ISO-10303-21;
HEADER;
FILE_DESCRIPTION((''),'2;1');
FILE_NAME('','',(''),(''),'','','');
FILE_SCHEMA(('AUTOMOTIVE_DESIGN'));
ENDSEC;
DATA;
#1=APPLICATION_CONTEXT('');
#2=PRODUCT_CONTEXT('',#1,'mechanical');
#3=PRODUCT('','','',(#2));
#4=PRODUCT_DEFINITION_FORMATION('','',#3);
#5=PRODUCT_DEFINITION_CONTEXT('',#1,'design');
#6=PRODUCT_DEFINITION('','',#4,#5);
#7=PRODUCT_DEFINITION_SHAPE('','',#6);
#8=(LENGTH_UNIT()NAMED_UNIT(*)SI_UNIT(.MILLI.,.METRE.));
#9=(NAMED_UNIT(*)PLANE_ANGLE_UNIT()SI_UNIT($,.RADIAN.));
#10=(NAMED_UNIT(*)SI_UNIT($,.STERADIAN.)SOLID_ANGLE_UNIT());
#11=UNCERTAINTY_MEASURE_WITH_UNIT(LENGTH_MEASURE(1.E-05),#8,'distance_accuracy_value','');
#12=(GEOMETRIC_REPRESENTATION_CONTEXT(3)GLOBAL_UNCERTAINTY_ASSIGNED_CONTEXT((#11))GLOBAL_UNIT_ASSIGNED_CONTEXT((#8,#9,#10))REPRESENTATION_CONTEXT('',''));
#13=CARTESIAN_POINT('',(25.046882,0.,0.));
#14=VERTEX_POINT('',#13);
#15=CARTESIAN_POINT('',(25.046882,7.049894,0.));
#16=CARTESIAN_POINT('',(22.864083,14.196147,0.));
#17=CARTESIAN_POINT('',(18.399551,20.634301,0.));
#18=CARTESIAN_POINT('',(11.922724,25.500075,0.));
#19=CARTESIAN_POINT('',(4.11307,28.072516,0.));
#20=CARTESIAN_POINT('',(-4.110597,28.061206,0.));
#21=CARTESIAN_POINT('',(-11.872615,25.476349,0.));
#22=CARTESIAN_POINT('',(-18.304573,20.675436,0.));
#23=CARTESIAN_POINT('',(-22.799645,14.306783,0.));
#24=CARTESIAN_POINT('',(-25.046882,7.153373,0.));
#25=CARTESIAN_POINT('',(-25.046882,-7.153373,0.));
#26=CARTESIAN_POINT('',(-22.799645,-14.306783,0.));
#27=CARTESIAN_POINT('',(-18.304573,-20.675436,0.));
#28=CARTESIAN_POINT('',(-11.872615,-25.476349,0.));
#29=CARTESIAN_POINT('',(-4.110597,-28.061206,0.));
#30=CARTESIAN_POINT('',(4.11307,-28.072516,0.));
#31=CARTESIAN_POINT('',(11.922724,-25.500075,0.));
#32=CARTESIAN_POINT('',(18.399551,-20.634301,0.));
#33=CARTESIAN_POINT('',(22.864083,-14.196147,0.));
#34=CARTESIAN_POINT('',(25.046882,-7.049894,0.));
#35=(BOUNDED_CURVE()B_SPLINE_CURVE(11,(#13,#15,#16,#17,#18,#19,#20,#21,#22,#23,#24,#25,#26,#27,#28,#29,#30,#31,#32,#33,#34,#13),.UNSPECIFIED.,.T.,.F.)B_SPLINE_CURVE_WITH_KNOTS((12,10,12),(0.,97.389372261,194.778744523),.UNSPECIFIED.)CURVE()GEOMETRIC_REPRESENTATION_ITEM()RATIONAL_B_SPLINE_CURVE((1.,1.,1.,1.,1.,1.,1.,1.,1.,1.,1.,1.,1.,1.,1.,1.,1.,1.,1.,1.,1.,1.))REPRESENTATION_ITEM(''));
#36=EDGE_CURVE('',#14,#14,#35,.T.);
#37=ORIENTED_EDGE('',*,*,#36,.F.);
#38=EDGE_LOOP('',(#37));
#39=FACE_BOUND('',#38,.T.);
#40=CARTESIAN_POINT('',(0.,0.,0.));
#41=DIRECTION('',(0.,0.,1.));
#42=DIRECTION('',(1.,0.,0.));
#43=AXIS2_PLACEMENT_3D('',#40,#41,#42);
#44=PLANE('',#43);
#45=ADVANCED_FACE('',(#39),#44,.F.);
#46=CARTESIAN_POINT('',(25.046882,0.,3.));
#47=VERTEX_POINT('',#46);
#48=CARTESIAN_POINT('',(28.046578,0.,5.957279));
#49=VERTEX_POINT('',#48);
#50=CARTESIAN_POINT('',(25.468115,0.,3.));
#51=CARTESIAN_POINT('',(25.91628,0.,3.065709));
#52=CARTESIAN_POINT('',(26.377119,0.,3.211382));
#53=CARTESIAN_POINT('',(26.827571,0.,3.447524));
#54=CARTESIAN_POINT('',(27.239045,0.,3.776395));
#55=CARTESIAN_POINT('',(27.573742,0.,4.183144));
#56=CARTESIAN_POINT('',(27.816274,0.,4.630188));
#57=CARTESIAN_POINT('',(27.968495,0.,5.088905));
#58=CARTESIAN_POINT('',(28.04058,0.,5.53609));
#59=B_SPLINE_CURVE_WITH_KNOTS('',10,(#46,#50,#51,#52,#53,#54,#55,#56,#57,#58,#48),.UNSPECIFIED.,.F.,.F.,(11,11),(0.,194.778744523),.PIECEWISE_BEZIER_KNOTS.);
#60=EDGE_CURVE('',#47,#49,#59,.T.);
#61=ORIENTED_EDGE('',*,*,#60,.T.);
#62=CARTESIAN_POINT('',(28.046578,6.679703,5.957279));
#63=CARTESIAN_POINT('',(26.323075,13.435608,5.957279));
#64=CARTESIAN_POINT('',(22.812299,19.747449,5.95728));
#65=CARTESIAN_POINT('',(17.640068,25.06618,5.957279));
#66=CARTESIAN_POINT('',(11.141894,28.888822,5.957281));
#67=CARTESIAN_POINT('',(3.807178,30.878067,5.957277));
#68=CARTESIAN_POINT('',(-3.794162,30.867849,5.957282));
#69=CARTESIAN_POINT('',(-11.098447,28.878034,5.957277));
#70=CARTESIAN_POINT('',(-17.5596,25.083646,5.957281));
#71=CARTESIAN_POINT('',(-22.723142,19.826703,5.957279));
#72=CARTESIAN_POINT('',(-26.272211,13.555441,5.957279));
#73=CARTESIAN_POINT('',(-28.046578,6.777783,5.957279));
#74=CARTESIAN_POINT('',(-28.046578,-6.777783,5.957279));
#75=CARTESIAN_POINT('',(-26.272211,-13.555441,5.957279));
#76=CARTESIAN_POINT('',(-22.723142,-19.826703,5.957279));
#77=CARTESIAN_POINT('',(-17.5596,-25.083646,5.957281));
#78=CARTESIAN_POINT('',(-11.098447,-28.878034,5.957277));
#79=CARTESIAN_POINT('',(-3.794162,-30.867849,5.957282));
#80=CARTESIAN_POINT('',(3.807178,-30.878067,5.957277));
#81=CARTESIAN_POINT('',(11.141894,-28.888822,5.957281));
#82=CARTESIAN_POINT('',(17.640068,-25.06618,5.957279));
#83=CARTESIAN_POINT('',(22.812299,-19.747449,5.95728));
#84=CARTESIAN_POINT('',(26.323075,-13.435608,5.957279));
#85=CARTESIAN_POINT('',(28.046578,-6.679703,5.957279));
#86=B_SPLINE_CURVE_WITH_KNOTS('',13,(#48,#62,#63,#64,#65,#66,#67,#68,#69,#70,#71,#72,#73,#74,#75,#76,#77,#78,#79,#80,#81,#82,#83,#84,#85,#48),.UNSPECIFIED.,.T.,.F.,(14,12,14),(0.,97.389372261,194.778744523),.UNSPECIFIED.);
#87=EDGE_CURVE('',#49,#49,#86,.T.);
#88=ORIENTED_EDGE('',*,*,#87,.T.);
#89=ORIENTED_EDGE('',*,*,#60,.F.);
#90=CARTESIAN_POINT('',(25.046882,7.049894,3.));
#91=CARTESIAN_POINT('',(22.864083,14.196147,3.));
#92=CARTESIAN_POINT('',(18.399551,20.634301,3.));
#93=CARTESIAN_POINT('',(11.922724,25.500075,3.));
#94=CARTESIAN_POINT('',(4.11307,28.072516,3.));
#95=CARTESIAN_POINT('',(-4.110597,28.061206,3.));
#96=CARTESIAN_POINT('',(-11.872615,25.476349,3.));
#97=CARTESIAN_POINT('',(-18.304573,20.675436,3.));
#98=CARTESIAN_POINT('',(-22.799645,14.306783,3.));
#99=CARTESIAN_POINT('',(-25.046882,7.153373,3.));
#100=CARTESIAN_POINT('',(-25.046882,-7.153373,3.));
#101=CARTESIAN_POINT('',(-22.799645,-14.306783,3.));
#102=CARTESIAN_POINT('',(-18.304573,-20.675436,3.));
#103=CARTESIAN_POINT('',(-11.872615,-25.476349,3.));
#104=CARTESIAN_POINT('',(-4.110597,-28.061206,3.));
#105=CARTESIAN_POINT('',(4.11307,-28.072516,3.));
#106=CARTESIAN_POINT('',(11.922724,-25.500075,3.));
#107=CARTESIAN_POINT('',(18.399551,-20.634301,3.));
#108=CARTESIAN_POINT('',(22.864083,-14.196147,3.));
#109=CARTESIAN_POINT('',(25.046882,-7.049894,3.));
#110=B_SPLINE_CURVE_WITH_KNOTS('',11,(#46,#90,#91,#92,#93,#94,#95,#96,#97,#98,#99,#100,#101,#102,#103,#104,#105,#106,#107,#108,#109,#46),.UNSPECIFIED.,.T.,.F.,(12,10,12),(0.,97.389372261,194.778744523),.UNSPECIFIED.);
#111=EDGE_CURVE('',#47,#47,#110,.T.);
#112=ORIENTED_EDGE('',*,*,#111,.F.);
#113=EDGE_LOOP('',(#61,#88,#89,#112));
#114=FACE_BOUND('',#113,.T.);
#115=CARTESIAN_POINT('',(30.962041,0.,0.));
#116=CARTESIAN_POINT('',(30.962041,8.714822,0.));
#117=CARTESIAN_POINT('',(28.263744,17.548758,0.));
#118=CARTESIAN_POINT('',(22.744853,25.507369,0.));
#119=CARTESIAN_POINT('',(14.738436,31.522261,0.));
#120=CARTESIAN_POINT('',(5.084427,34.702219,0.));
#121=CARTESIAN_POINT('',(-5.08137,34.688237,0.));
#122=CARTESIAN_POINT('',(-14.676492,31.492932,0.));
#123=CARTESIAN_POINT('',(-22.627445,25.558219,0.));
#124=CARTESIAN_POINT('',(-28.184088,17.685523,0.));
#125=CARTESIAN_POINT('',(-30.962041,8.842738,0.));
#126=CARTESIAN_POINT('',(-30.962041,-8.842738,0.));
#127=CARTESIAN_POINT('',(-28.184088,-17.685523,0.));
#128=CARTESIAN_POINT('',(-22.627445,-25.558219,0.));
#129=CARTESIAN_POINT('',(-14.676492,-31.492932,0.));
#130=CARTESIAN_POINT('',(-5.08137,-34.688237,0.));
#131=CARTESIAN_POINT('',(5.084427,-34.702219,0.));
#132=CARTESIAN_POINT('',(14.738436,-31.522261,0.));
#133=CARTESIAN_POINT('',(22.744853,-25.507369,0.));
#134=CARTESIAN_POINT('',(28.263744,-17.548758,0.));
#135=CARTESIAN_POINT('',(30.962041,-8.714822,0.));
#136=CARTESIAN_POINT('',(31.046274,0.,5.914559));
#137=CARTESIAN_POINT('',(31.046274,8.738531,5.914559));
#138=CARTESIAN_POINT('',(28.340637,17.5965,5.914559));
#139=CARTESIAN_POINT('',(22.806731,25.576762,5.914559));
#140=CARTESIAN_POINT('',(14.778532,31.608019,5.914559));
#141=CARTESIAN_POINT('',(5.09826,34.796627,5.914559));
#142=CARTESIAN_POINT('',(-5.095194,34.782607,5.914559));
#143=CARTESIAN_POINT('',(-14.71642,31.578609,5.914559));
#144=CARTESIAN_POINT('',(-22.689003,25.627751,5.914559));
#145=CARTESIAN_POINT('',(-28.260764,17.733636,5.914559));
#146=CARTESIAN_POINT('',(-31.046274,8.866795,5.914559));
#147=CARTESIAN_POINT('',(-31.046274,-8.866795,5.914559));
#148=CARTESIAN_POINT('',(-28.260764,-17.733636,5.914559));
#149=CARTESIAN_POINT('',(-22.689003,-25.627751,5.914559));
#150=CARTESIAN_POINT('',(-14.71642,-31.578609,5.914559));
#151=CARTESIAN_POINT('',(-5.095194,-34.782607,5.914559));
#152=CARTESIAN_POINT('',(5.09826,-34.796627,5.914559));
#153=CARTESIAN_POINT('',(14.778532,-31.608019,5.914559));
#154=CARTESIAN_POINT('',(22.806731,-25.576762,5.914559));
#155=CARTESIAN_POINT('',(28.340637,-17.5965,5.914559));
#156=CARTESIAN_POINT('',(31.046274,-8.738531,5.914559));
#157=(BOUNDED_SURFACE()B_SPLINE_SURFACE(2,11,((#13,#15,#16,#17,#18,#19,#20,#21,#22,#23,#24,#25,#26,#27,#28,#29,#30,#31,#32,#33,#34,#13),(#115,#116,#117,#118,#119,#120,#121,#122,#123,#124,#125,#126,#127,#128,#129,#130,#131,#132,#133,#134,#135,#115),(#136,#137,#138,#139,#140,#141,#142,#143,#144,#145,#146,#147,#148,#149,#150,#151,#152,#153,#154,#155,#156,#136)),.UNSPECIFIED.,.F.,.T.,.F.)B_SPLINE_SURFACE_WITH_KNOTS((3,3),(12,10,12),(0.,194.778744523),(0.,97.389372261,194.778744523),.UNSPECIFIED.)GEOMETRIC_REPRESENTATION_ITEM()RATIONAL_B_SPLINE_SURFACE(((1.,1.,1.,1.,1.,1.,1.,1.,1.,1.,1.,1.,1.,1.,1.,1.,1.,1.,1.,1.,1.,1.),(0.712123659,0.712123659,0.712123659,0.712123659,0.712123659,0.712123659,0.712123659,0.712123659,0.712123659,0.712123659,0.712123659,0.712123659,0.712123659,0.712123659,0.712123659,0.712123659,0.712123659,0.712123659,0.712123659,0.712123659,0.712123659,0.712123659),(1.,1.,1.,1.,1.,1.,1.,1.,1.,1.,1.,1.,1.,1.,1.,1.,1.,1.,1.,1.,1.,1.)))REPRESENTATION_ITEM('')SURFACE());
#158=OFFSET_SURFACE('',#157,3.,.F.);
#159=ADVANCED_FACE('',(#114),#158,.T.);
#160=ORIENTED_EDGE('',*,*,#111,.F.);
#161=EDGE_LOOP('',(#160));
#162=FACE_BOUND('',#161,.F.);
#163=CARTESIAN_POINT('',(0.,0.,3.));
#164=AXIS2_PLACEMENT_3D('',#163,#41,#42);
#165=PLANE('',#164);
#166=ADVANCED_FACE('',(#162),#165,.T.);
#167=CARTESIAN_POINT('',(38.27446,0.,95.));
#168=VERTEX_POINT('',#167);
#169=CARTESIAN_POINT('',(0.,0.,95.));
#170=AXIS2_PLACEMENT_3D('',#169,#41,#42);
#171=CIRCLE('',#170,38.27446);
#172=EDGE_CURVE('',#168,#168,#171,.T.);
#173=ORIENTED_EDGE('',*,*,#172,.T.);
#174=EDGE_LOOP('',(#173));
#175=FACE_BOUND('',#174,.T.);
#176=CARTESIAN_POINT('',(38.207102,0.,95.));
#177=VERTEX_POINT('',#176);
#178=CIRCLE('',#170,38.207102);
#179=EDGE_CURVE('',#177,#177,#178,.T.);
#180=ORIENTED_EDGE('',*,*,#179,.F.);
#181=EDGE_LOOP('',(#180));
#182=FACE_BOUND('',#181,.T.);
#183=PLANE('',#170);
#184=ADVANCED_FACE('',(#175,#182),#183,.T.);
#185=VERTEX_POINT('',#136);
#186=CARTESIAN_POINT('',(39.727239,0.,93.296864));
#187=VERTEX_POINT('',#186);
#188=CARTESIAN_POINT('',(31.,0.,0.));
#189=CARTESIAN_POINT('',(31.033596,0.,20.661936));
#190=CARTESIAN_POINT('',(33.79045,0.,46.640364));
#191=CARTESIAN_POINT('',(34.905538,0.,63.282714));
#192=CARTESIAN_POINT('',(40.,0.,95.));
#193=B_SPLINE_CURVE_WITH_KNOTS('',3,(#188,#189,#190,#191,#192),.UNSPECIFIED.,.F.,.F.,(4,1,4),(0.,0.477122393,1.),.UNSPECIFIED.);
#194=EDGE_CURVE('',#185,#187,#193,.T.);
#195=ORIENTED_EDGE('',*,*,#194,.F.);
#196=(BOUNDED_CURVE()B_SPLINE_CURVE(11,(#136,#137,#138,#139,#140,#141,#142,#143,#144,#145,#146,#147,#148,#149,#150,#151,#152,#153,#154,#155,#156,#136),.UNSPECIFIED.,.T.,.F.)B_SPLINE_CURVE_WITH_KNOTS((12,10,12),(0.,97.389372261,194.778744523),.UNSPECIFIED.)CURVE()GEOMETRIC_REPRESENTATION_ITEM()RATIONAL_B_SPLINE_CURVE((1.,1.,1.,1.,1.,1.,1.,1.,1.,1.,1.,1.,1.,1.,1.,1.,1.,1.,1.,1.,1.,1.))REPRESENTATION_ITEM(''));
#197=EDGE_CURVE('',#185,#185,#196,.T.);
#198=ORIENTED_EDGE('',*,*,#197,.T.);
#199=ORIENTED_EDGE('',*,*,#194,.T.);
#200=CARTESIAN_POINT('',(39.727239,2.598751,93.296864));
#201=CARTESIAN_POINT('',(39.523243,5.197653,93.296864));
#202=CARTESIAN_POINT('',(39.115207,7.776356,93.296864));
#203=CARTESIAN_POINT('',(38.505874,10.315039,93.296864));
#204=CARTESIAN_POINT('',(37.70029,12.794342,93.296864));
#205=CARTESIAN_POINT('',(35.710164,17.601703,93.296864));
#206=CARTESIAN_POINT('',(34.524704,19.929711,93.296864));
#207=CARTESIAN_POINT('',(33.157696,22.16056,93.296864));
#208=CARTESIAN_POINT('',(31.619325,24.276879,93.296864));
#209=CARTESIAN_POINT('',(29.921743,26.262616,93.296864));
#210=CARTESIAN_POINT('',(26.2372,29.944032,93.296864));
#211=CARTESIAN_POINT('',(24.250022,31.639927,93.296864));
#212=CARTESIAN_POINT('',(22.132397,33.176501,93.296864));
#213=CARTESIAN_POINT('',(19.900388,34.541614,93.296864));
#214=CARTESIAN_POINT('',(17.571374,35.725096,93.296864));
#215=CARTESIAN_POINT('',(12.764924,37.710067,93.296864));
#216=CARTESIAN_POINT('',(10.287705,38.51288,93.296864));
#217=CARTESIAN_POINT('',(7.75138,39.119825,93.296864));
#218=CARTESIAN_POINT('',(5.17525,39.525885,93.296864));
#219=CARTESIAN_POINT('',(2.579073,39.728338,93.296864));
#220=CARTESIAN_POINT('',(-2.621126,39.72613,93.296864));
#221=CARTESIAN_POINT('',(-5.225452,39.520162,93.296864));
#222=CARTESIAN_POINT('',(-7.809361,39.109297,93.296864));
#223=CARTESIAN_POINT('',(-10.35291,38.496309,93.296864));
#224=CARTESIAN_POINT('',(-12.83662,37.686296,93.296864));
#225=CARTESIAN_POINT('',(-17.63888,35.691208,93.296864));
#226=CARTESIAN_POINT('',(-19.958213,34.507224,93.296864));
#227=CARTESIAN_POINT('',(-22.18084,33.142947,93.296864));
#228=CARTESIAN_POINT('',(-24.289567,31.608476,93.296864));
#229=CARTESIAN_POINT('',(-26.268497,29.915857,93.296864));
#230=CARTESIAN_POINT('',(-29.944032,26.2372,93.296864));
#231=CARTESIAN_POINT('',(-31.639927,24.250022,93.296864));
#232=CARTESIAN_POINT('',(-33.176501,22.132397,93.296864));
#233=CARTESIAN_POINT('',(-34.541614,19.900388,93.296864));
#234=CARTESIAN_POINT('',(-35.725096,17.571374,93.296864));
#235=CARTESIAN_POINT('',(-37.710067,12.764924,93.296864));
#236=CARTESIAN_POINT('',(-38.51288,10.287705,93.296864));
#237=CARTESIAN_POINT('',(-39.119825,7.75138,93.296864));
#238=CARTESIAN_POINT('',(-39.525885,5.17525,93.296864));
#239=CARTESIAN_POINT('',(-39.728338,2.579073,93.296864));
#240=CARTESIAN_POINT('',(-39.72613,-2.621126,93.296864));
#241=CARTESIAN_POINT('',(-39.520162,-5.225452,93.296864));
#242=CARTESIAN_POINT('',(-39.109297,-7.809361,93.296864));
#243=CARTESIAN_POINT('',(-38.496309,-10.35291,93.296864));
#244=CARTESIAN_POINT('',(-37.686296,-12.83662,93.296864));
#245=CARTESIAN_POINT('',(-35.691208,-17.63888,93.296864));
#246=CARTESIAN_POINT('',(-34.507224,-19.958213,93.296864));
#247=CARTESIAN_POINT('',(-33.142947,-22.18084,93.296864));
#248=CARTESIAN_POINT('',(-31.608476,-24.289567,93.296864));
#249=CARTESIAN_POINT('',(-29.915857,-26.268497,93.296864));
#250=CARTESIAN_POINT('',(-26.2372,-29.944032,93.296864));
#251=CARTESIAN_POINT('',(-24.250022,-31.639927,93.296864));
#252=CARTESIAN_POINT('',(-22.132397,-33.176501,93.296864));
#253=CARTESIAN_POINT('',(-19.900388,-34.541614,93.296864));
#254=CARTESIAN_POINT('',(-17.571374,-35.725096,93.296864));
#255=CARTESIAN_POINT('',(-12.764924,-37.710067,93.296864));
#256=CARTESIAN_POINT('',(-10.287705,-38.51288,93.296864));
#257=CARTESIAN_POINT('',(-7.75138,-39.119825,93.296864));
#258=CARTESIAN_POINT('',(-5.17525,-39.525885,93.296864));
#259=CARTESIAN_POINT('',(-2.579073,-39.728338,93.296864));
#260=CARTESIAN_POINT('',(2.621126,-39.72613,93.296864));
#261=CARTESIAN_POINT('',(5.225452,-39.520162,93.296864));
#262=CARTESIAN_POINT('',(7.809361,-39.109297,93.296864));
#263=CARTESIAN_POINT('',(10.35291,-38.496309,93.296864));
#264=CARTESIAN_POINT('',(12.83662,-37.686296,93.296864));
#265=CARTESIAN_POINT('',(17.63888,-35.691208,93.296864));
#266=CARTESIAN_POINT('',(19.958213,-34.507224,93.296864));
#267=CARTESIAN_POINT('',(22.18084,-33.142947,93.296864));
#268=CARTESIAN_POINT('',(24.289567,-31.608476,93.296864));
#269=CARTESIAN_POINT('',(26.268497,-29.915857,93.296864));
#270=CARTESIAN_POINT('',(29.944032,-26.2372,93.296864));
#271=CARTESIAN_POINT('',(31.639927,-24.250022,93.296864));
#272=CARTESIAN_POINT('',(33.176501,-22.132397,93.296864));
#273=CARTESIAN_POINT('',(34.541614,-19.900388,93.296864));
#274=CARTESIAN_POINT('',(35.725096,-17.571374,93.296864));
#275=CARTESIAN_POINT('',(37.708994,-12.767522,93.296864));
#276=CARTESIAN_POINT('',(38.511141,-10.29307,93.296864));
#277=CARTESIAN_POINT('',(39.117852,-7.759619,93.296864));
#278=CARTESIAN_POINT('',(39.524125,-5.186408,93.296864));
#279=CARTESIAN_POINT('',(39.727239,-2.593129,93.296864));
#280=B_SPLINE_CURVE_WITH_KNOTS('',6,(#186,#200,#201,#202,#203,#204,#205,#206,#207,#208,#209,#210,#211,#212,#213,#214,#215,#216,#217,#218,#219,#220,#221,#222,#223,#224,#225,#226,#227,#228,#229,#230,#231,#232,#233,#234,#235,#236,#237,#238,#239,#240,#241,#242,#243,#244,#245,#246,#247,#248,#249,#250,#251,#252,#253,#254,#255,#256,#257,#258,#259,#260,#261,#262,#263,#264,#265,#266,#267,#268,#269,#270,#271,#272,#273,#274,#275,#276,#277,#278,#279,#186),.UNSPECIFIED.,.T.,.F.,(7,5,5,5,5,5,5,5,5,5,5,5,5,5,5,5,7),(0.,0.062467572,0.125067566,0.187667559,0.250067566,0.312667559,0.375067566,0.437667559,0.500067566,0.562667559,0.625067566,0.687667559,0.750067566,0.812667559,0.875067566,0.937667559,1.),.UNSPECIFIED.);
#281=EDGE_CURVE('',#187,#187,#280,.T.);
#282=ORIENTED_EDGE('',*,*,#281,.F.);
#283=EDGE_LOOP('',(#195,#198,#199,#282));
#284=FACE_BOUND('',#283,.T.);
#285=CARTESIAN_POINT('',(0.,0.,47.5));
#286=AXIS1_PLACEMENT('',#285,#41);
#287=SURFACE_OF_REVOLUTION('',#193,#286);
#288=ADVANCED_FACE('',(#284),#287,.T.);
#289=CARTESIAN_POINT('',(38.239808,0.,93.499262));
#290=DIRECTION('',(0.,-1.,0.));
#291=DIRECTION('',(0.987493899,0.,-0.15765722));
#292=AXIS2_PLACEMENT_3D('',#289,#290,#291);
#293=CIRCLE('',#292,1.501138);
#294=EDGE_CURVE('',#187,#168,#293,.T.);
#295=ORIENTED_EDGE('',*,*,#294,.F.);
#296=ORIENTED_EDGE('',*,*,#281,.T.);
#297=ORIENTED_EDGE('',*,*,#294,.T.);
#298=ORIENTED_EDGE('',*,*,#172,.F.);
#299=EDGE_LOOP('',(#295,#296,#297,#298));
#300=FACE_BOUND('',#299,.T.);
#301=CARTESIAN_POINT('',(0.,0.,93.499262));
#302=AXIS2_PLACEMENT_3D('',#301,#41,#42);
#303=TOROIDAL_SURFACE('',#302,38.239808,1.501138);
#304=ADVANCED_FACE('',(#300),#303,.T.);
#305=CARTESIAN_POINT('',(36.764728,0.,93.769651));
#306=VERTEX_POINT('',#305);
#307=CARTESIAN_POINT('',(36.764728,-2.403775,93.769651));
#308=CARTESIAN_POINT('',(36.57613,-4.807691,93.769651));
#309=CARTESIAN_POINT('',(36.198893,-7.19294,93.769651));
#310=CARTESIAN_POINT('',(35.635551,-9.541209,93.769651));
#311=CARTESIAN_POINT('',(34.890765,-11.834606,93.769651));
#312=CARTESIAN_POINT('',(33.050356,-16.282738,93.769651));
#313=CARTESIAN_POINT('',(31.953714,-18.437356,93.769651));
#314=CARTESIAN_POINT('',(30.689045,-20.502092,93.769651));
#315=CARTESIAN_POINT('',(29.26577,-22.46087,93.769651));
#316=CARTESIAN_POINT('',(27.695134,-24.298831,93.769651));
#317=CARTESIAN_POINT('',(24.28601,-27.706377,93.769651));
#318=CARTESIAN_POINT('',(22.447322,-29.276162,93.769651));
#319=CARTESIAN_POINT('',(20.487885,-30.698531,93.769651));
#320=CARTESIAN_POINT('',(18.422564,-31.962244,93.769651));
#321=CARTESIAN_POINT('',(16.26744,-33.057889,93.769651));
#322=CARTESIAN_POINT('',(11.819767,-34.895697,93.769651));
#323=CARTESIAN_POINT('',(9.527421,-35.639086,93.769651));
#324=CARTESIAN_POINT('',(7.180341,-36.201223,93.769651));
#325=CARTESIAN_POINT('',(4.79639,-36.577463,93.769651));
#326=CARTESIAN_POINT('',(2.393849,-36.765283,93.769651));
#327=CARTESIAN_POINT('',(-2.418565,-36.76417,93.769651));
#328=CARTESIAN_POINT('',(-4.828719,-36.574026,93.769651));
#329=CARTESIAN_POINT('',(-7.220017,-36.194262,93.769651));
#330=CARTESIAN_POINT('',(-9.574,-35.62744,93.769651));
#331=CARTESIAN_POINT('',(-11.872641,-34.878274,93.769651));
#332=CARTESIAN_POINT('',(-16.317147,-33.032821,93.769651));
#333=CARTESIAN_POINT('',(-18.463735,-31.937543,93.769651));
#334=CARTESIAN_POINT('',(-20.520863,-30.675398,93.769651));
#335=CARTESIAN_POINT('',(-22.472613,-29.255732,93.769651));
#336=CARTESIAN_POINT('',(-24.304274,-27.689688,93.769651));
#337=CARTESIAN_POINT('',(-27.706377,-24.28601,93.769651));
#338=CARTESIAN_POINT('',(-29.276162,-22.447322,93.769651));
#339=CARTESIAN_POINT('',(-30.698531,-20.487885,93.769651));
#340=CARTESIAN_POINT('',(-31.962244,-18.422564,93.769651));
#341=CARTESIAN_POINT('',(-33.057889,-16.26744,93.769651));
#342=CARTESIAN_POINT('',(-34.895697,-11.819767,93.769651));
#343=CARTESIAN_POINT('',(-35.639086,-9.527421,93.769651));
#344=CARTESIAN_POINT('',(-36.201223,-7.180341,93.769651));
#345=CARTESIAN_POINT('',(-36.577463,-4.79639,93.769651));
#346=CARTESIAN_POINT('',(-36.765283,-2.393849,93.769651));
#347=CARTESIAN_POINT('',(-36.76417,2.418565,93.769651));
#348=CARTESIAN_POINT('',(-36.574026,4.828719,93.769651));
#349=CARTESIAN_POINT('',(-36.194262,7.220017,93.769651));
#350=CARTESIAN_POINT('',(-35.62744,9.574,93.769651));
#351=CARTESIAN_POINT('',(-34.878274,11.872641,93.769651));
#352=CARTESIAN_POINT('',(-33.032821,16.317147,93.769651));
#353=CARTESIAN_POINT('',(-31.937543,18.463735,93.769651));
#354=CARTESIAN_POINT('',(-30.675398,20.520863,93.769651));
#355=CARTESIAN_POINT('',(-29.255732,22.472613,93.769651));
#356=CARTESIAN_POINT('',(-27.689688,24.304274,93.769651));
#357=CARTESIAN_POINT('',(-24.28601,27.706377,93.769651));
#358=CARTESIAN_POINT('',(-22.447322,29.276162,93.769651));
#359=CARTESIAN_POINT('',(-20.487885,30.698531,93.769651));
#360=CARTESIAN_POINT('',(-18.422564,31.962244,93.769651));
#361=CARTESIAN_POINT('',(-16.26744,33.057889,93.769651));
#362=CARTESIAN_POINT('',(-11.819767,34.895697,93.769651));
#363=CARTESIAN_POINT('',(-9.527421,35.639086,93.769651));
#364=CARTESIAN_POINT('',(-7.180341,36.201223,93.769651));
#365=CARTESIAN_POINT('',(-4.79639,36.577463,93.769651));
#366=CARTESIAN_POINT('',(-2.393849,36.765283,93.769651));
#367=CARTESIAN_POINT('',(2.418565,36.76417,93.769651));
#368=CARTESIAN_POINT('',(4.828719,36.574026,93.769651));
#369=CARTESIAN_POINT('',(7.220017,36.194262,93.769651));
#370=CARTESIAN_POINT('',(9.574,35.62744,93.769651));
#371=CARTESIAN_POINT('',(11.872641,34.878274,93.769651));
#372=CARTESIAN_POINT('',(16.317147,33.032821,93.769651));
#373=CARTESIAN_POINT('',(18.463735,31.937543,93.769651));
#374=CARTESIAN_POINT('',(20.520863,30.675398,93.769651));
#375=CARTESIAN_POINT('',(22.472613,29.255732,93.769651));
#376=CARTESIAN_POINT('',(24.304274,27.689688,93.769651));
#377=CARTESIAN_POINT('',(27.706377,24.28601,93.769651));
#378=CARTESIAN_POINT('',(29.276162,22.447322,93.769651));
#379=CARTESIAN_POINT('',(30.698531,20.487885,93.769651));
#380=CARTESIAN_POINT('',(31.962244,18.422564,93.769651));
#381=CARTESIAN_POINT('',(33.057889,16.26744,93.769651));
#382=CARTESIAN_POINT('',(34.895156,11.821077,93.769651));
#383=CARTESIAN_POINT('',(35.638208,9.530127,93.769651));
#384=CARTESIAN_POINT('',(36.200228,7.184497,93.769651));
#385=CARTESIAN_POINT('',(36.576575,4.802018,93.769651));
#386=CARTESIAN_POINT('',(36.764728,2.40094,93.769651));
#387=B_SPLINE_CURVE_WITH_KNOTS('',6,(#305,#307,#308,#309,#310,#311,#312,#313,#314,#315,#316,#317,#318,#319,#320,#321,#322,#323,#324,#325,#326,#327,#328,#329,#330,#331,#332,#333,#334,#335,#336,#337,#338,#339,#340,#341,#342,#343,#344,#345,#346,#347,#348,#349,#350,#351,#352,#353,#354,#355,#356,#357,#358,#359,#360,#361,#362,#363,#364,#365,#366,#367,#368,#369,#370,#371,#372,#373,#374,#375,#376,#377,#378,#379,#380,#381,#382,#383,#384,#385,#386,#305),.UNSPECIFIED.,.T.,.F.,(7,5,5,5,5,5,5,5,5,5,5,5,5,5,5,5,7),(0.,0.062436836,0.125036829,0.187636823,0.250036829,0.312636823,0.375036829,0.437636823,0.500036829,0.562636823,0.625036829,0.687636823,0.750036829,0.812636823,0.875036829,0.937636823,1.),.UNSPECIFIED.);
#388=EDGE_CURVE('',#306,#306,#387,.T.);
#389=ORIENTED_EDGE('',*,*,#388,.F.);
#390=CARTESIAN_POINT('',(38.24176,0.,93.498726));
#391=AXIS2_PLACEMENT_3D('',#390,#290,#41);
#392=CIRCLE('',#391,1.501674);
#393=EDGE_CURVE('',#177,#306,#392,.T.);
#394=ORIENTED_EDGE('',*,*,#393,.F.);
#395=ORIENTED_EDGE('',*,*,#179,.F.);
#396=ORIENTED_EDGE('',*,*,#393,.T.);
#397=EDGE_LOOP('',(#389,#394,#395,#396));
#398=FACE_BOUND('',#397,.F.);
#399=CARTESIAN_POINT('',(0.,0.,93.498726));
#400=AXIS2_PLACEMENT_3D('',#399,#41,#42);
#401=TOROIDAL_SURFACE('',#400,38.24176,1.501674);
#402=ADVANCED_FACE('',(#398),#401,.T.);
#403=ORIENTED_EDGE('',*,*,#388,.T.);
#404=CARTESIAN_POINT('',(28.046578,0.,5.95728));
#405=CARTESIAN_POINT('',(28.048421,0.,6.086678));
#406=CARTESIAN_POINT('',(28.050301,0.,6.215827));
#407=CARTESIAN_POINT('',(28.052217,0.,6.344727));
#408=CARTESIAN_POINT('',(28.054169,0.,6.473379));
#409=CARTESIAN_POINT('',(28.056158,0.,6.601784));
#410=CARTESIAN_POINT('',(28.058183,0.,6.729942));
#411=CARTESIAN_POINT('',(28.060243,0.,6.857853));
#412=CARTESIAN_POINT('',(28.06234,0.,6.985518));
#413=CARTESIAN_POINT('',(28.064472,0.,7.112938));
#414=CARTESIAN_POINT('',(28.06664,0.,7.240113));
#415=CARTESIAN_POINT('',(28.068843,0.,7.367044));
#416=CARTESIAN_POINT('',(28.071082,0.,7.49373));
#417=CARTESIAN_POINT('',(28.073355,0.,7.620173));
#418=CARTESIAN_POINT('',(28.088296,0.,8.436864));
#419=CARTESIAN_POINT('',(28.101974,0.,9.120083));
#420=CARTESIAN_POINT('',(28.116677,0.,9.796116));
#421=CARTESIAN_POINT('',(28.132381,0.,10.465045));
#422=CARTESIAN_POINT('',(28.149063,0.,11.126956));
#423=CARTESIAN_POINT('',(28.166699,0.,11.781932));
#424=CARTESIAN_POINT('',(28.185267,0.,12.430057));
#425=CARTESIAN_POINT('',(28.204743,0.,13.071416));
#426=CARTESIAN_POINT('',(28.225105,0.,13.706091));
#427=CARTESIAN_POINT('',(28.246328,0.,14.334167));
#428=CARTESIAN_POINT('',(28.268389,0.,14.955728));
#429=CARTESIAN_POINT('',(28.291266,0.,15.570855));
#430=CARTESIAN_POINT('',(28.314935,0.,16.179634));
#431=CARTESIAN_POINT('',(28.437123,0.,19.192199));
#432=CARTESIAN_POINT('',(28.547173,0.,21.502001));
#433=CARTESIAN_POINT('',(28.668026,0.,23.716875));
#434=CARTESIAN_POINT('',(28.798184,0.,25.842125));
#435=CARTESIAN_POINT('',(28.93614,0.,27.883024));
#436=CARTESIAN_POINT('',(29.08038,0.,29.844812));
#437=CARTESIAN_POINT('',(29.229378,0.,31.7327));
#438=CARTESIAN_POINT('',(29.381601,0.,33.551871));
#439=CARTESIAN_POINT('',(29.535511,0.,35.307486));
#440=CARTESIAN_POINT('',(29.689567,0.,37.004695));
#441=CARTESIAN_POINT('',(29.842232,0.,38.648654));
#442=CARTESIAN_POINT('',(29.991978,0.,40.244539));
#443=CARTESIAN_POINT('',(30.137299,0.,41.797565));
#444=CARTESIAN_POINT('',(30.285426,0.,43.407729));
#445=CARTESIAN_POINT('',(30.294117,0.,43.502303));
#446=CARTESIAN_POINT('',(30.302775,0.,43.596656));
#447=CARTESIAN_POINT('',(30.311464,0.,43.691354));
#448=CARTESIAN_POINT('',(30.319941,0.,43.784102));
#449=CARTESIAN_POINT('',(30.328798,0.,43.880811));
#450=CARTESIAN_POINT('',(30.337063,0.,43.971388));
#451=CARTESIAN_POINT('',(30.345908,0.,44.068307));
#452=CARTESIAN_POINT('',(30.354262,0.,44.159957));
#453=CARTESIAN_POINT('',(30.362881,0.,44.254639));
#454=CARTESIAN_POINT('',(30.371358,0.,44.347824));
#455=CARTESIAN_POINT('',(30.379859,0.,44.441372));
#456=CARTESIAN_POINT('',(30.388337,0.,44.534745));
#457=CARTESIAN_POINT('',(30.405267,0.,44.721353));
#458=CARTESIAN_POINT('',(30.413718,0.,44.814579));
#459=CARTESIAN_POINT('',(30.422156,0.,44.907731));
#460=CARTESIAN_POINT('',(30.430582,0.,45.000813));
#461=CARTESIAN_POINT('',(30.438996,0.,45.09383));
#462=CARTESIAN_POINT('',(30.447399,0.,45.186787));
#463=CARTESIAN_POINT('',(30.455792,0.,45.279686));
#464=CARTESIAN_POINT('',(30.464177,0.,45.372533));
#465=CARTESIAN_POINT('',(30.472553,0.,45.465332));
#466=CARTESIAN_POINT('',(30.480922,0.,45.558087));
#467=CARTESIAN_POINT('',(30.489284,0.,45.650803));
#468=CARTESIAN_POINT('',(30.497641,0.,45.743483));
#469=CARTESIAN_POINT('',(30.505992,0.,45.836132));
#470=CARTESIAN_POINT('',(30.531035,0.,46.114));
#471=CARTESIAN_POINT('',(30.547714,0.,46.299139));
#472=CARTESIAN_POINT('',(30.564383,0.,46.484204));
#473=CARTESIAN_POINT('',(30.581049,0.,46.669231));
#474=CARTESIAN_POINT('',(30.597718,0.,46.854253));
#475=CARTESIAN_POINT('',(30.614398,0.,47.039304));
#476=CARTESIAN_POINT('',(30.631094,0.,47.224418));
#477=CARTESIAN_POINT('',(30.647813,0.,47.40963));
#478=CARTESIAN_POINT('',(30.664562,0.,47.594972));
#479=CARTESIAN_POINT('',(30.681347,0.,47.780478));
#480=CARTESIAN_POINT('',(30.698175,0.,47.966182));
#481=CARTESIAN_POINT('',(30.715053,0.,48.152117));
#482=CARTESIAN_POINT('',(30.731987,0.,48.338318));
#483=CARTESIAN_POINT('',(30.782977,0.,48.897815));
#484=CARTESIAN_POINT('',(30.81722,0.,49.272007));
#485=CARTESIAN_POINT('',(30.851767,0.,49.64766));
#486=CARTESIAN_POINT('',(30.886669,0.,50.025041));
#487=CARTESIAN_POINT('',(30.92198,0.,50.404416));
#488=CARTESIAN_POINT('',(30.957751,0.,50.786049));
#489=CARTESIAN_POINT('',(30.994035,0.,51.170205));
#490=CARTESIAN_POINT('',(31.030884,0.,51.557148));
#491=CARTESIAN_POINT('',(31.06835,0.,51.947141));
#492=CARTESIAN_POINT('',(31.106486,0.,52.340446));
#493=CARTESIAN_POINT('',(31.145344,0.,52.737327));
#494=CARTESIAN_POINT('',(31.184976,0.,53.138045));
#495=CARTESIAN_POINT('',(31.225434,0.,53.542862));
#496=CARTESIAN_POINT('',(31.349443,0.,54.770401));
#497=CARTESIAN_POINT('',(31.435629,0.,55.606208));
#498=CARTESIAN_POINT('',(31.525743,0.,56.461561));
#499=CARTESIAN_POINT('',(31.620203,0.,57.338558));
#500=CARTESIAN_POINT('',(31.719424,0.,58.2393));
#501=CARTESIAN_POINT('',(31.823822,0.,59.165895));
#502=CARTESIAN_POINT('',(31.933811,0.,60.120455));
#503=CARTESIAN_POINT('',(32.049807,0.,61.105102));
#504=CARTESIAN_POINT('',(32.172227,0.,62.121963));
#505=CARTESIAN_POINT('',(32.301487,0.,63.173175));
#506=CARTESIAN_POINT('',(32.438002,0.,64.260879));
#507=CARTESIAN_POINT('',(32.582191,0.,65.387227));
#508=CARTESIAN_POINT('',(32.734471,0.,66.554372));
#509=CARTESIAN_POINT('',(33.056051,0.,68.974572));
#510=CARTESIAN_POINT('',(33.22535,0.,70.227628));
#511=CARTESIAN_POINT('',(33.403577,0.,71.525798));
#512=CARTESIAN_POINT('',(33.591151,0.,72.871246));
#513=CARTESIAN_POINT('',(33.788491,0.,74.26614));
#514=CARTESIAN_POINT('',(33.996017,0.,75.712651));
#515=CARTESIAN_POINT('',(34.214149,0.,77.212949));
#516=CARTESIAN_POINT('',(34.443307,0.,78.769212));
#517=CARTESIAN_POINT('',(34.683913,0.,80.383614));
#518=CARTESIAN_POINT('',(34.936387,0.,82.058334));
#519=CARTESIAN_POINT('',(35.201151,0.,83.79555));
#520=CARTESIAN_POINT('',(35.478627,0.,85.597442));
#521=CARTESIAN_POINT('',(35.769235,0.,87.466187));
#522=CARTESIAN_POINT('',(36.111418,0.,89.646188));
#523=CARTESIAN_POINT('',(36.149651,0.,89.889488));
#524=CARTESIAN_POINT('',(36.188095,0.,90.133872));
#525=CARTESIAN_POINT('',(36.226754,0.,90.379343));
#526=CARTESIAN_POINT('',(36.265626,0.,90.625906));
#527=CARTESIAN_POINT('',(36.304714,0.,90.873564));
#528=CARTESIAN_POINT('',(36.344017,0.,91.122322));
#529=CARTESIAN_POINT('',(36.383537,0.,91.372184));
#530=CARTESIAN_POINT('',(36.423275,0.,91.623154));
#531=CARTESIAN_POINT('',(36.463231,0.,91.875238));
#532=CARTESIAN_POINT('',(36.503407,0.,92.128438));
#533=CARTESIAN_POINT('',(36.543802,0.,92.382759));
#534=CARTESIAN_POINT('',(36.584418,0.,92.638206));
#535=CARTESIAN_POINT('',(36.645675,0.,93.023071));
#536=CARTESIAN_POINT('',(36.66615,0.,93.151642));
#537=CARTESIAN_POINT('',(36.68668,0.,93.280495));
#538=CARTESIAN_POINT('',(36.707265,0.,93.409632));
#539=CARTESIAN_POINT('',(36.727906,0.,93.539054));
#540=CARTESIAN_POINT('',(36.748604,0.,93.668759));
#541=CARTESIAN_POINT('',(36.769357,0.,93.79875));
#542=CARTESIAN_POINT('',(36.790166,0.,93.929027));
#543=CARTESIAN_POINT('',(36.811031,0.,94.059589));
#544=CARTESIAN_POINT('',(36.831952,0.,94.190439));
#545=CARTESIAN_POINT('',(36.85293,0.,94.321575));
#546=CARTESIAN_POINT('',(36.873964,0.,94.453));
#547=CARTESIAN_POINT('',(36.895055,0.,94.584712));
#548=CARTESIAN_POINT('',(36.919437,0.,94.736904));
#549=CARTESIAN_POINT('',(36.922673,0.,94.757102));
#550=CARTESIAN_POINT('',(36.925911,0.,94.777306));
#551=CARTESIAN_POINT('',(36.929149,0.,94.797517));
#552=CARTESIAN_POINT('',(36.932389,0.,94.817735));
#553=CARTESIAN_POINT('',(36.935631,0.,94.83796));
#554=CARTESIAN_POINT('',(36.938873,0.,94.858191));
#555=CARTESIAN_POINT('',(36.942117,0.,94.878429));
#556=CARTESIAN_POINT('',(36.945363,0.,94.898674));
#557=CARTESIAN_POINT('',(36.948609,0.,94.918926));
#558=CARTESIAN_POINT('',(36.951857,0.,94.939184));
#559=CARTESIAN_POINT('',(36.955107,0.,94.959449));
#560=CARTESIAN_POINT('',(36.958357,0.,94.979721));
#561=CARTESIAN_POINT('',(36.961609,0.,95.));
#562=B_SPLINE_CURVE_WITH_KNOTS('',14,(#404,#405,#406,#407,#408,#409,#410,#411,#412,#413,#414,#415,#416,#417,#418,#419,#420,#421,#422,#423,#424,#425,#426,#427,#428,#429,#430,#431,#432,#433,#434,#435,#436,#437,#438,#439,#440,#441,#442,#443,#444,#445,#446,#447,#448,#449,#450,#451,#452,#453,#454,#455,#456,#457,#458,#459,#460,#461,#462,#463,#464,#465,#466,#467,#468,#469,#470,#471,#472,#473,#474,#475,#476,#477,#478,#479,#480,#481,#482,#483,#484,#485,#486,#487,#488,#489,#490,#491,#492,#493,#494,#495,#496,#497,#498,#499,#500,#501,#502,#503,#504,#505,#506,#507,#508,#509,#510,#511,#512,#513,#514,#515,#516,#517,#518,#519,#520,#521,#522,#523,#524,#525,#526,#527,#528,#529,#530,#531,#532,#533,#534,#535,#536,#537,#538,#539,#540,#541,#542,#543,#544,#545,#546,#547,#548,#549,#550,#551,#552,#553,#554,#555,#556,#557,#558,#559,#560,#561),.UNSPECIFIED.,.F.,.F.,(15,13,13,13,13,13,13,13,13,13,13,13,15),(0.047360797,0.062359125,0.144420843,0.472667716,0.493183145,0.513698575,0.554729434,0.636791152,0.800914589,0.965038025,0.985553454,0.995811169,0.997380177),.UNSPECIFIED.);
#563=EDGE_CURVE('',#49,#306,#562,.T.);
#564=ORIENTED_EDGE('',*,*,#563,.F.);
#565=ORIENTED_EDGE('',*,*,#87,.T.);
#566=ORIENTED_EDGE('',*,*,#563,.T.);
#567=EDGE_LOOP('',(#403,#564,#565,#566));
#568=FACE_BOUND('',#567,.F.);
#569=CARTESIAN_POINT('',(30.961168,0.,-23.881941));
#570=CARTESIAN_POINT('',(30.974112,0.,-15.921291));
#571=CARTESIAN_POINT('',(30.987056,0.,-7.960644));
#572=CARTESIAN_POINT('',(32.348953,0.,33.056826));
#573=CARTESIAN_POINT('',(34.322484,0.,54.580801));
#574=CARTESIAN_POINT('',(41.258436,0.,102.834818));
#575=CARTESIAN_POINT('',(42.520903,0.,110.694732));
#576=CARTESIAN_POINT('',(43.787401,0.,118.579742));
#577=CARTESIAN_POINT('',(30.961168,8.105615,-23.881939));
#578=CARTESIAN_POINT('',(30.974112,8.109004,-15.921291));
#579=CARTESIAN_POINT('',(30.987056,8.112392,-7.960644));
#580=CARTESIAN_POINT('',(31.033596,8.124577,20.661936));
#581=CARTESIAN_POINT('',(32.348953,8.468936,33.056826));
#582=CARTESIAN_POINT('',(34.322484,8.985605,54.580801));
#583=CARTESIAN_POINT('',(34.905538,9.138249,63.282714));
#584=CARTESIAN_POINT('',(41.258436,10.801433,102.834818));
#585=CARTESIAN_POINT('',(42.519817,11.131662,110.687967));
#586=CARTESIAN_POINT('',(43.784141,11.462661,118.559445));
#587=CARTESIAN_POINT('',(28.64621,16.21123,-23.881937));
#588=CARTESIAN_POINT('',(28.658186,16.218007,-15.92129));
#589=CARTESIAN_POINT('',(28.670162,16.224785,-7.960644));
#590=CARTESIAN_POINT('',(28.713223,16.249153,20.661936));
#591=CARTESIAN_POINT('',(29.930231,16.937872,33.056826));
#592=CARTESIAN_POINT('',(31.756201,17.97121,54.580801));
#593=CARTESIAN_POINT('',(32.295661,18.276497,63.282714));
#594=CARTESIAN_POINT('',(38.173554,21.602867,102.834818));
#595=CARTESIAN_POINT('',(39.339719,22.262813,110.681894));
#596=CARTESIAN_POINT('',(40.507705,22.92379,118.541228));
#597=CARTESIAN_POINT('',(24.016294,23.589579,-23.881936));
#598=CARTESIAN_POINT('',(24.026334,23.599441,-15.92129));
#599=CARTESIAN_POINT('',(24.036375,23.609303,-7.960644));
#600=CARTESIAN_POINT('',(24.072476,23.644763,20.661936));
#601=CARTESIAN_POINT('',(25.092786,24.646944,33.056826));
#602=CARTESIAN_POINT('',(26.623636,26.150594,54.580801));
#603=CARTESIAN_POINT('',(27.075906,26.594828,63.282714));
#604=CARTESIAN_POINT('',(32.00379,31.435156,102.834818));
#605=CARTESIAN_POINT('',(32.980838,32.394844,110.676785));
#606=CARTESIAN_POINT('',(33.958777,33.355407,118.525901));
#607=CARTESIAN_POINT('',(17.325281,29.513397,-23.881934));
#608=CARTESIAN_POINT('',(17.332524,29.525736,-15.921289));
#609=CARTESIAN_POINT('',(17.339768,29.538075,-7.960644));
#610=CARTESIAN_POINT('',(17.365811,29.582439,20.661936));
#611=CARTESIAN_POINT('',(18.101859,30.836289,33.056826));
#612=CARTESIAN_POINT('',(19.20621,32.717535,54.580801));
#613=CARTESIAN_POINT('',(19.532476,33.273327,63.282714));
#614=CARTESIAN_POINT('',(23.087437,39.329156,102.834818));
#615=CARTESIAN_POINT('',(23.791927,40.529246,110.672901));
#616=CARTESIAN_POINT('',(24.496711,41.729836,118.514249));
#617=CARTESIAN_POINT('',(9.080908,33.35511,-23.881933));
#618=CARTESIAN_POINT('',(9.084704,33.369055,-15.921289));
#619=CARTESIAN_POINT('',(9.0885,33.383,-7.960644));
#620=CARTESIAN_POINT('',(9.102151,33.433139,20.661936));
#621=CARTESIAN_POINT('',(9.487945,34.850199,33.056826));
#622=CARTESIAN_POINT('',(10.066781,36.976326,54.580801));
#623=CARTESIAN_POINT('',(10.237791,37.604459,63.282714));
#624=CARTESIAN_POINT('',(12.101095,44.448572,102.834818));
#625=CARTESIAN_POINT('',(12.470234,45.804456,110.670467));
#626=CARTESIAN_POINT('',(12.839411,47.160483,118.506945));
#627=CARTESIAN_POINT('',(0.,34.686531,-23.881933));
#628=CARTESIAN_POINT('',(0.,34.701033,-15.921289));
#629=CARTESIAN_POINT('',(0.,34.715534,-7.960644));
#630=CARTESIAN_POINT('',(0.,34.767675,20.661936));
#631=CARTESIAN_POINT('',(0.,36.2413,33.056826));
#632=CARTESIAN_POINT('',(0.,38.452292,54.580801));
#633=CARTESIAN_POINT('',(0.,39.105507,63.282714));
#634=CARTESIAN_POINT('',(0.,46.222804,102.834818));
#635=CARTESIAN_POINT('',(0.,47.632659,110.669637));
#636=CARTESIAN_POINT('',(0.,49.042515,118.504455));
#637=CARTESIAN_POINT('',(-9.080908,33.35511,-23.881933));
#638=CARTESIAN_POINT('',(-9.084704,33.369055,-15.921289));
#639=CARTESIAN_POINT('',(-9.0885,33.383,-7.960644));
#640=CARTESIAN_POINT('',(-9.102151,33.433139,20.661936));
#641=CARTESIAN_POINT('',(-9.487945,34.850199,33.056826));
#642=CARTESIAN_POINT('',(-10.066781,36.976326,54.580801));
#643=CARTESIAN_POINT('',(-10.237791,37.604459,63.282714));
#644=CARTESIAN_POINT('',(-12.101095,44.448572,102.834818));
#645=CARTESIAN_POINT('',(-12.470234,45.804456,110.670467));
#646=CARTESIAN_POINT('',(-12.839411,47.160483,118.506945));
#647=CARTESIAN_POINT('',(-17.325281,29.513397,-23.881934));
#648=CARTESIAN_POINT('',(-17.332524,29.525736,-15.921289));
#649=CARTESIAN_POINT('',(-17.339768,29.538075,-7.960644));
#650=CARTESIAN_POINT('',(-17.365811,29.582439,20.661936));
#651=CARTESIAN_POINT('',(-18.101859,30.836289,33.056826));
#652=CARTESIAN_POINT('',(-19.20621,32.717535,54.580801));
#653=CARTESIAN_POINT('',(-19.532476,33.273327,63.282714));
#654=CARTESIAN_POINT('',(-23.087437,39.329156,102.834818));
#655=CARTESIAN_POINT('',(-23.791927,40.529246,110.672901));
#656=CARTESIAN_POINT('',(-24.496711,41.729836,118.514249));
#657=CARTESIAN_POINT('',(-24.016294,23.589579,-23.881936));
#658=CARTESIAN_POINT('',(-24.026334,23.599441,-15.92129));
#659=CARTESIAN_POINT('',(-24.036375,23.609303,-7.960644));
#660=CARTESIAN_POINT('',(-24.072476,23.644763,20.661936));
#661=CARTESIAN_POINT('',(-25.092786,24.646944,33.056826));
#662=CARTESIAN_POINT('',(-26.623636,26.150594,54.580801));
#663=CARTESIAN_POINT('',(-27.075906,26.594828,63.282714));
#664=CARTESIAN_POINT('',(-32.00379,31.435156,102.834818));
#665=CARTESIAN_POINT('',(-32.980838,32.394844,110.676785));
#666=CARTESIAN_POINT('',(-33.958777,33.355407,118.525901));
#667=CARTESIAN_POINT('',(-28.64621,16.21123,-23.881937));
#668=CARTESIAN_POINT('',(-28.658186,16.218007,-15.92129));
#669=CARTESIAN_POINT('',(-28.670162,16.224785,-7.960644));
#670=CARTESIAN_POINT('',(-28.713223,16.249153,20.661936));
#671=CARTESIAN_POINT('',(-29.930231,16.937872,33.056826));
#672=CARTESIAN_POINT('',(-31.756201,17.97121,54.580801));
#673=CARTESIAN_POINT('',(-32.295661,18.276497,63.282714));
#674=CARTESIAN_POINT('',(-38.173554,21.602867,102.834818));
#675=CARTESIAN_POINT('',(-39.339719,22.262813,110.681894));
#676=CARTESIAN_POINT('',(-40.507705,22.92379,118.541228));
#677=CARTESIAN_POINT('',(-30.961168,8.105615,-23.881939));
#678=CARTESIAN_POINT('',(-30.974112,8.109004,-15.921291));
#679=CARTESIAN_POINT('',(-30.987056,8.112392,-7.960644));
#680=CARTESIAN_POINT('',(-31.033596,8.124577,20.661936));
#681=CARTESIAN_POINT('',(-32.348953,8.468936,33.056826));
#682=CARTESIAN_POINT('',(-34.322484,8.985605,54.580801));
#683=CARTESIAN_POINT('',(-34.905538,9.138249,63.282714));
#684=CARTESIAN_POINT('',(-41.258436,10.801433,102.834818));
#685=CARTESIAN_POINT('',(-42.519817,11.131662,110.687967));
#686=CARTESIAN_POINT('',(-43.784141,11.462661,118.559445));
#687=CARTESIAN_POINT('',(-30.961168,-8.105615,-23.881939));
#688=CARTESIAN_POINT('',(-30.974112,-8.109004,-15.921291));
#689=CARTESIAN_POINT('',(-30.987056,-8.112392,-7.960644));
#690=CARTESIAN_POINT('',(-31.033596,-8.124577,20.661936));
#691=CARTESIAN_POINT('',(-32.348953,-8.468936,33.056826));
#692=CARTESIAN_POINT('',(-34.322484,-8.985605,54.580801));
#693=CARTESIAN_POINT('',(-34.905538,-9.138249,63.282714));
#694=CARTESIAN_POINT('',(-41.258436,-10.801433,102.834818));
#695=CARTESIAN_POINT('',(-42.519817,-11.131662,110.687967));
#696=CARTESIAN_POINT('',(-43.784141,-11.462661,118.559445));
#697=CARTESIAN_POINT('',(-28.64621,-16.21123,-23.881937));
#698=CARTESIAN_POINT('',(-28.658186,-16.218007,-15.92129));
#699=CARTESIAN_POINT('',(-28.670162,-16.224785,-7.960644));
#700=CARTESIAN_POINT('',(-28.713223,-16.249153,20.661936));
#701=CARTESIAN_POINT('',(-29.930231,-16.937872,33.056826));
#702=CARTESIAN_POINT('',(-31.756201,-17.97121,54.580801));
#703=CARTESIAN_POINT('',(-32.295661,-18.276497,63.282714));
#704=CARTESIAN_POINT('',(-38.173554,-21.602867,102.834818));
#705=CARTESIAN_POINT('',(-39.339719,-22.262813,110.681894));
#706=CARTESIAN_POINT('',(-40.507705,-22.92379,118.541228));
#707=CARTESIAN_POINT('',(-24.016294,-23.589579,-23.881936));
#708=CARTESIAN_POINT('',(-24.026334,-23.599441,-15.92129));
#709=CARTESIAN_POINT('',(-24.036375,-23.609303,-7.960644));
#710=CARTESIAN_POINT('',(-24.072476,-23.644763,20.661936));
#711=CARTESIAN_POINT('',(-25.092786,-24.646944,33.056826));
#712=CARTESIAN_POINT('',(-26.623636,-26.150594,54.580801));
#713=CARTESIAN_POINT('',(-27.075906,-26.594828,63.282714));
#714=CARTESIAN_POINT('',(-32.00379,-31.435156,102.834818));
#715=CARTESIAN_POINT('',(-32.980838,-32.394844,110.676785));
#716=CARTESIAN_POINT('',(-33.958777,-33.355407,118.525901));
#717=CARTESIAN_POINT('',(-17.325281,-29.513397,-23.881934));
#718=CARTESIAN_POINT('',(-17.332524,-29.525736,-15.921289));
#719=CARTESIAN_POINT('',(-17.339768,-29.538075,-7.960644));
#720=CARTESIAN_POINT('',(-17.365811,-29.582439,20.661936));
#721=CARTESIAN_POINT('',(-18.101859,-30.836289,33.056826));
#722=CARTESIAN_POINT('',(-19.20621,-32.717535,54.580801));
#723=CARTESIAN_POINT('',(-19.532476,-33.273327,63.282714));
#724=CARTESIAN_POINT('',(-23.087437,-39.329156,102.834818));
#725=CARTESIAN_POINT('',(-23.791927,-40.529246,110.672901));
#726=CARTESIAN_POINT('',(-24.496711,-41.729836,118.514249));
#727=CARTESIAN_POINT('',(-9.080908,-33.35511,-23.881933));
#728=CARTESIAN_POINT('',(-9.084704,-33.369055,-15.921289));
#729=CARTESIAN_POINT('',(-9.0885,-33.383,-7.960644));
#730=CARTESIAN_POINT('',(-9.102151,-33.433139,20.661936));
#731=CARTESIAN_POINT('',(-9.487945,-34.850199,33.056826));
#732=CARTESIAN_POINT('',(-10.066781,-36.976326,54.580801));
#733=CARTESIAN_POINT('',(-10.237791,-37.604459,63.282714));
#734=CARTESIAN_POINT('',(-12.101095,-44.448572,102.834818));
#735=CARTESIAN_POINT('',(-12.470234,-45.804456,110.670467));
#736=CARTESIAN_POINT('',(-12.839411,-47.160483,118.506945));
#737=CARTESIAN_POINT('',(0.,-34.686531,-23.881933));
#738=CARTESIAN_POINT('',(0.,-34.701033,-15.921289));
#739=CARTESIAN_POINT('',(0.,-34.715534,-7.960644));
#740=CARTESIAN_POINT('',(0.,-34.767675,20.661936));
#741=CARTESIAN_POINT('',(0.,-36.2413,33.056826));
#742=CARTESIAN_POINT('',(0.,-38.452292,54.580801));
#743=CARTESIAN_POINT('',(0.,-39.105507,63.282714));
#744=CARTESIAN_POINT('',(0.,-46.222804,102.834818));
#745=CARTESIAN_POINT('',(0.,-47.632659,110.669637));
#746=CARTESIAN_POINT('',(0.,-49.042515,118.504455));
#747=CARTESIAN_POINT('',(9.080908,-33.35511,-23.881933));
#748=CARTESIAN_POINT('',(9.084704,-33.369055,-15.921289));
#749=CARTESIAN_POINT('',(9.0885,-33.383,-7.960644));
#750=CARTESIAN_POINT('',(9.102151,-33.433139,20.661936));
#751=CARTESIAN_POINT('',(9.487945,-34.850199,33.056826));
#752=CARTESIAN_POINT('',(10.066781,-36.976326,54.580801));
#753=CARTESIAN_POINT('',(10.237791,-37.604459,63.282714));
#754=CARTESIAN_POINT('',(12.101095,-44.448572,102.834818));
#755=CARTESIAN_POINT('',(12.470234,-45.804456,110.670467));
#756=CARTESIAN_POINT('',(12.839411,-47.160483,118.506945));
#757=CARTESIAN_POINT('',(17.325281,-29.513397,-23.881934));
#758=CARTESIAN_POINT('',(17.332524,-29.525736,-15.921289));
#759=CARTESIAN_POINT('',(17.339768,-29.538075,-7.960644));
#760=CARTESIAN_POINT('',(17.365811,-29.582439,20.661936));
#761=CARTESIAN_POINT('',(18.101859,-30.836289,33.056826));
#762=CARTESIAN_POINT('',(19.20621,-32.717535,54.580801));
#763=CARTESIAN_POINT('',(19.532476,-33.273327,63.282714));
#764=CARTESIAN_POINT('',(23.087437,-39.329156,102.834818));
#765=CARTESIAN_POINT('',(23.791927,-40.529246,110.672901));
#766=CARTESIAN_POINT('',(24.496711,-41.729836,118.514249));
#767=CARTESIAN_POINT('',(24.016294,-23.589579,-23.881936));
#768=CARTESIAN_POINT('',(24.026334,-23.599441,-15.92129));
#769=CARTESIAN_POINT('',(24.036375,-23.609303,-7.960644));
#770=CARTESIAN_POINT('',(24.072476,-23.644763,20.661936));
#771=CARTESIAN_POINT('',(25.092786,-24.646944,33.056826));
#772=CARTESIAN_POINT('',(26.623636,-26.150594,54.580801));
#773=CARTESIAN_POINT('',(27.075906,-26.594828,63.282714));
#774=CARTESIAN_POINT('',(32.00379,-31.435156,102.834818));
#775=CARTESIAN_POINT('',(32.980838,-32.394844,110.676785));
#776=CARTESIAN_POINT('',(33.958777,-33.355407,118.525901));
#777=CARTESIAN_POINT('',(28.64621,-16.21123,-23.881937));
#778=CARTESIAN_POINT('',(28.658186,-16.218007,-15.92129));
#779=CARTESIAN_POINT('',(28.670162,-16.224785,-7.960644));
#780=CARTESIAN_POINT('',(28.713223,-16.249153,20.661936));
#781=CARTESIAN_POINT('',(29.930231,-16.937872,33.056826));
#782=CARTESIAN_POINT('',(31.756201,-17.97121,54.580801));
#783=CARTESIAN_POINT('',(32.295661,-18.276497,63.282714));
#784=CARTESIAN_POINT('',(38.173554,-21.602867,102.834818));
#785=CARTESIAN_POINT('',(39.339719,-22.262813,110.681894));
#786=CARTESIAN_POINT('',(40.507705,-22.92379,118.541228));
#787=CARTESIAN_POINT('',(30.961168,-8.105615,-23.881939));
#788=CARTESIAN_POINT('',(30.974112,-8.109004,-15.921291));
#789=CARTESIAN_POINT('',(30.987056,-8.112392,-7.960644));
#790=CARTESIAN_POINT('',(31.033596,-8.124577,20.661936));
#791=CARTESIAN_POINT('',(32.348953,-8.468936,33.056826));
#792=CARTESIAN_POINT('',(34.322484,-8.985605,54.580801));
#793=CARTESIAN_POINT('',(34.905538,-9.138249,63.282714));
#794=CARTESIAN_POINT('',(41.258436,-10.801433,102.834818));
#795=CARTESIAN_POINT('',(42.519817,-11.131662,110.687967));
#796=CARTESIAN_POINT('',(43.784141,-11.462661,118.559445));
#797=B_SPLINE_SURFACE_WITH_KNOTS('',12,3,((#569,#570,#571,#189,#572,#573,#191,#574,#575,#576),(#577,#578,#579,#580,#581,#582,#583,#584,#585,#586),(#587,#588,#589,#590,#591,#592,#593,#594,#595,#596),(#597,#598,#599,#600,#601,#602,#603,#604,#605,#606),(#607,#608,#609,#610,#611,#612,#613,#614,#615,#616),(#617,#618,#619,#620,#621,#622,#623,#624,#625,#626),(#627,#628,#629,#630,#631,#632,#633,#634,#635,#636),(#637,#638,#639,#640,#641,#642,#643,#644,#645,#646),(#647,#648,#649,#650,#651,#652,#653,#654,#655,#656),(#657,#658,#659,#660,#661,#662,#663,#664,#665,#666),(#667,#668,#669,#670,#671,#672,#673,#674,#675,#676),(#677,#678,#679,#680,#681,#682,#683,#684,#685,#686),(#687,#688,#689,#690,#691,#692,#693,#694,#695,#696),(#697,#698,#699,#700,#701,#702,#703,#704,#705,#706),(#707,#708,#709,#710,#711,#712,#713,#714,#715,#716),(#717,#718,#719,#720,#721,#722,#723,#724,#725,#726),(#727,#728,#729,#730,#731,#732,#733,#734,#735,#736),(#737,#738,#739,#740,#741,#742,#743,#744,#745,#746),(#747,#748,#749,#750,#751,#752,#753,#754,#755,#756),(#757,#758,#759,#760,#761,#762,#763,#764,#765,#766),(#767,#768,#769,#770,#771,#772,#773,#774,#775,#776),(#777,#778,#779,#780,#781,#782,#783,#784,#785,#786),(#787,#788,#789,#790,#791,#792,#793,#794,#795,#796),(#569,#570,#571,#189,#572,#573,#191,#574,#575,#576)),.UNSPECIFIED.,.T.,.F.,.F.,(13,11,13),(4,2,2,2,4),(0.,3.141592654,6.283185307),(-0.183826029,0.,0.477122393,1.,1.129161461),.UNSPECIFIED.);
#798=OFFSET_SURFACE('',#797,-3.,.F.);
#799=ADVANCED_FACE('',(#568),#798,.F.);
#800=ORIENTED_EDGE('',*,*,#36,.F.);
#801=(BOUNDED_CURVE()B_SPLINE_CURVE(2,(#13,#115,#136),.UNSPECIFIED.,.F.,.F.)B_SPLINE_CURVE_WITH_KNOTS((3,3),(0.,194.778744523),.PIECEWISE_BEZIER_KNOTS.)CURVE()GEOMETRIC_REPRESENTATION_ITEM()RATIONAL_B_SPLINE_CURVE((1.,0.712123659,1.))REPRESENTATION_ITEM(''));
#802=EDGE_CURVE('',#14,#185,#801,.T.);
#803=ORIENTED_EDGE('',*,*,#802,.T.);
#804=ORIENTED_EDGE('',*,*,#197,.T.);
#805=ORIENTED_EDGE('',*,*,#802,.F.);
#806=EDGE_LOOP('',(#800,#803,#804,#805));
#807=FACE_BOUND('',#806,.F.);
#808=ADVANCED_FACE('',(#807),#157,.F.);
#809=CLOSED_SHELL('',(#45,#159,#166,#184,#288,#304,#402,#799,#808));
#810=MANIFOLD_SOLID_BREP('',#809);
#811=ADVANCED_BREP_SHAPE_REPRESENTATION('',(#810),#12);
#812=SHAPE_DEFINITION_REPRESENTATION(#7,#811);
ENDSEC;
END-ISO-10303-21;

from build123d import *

# Parameters (mm, degrees)
F2_R = 6
F3_T = -3


# Not quite as in the source:
# - a fillet or chamfer that OpenCascade refuses, or shapes differently, is made with other operations: its cross-section is extruded or revolved along the edge and cut away or added


with BuildPart() as f1:
    # F0 (on Front) → F1 (revolve)
    with BuildSketch(Plane.XZ):
        with BuildLine():
            Line((0, 0), (31, 0))
            add(Edge.make_bspline(
                [(31, 0), (31.0335964643, 20.6619363198), (33.7904500865, 46.6403635335), (34.9055384881, 63.2827135687), (40, 95)],
                knots=[0, 0, 0, 0, 0.4771223932, 1, 1, 1, 1], degree=3))
            Line((40, 95), (0, 95))
            Line((0, 95), (0, 0))
        make_face()
    revolve(axis=Axis((0, 0, 47.5), (0, 0, 1)))

    # F2
    f2_edges = [f1.edges().sort_by_distance(p)[0] for p in [
        (-31, 0, 0),
    ]]
    fillet(f2_edges, radius=F2_R)

    # F3
    f3_openings = [f1.faces().sort_by_distance(p)[0] for p in [
        (0, 0, 95),
    ]]
    offset(amount=F3_T, openings=f3_openings)

    # F4: fillet of radius 1.5 on 2 edges, made by hand

    # F4_s1 → F4_t2 (revolve, cut)
    with BuildSketch(Plane.XZ):
        with BuildLine():
            ThreePointArc((39.7221731804, 93.2625963352), (39.3818860804, 94.4734661898), (38.2398082045, 95.0004))
            Line((38.2398082045, 95.0004), (38.2398082045, 95.1505138364))
            ThreePointArc((38.2398082045, 95.1505138364), (39.1199041022, 95.1501138364), (40, 95.1501138364))
            Line((40, 95.1501138364), (40.1482141159, 94.976193704))
            ThreePointArc((40.1482141159, 94.976193704), (40.0089095076, 94.10762509), (39.870409678, 93.2389298051))
            Line((39.870409678, 93.2389298051), (39.7221731804, 93.2625963352))
        make_face()
    revolve(axis=Axis((0, 0, 95), (0, 0, 1)), mode=Mode.SUBTRACT)

    # F4_s3 → F4_t4 (revolve, cut)
    with BuildSketch(Plane.XZ):
        with BuildLine():
            ThreePointArc((38.2417604202, 95.0004), (37.2672082694, 94.6412113654), (36.7588666118, 93.7354756815))
            Line((36.7588666118, 93.7354756815), (36.6105772309, 93.7591506361))
            ThreePointArc((36.6105772309, 93.7591506361), (36.7120450386, 94.3914504759), (36.8133361374, 95.0237774112))
            Line((36.8133361374, 95.0237774112), (36.9616091244, 95.1501673864))
            ThreePointArc((36.9616091244, 95.1501673864), (37.6016847723, 95.1501673864), (38.2417604202, 95.1505673864))
            Line((38.2417604202, 95.1505673864), (38.2417604202, 95.0004))
        make_face()
    revolve(axis=Axis((-6e-10, 1e-10, 95), (0, 0, -1)), mode=Mode.SUBTRACT)


solid = f1.part
